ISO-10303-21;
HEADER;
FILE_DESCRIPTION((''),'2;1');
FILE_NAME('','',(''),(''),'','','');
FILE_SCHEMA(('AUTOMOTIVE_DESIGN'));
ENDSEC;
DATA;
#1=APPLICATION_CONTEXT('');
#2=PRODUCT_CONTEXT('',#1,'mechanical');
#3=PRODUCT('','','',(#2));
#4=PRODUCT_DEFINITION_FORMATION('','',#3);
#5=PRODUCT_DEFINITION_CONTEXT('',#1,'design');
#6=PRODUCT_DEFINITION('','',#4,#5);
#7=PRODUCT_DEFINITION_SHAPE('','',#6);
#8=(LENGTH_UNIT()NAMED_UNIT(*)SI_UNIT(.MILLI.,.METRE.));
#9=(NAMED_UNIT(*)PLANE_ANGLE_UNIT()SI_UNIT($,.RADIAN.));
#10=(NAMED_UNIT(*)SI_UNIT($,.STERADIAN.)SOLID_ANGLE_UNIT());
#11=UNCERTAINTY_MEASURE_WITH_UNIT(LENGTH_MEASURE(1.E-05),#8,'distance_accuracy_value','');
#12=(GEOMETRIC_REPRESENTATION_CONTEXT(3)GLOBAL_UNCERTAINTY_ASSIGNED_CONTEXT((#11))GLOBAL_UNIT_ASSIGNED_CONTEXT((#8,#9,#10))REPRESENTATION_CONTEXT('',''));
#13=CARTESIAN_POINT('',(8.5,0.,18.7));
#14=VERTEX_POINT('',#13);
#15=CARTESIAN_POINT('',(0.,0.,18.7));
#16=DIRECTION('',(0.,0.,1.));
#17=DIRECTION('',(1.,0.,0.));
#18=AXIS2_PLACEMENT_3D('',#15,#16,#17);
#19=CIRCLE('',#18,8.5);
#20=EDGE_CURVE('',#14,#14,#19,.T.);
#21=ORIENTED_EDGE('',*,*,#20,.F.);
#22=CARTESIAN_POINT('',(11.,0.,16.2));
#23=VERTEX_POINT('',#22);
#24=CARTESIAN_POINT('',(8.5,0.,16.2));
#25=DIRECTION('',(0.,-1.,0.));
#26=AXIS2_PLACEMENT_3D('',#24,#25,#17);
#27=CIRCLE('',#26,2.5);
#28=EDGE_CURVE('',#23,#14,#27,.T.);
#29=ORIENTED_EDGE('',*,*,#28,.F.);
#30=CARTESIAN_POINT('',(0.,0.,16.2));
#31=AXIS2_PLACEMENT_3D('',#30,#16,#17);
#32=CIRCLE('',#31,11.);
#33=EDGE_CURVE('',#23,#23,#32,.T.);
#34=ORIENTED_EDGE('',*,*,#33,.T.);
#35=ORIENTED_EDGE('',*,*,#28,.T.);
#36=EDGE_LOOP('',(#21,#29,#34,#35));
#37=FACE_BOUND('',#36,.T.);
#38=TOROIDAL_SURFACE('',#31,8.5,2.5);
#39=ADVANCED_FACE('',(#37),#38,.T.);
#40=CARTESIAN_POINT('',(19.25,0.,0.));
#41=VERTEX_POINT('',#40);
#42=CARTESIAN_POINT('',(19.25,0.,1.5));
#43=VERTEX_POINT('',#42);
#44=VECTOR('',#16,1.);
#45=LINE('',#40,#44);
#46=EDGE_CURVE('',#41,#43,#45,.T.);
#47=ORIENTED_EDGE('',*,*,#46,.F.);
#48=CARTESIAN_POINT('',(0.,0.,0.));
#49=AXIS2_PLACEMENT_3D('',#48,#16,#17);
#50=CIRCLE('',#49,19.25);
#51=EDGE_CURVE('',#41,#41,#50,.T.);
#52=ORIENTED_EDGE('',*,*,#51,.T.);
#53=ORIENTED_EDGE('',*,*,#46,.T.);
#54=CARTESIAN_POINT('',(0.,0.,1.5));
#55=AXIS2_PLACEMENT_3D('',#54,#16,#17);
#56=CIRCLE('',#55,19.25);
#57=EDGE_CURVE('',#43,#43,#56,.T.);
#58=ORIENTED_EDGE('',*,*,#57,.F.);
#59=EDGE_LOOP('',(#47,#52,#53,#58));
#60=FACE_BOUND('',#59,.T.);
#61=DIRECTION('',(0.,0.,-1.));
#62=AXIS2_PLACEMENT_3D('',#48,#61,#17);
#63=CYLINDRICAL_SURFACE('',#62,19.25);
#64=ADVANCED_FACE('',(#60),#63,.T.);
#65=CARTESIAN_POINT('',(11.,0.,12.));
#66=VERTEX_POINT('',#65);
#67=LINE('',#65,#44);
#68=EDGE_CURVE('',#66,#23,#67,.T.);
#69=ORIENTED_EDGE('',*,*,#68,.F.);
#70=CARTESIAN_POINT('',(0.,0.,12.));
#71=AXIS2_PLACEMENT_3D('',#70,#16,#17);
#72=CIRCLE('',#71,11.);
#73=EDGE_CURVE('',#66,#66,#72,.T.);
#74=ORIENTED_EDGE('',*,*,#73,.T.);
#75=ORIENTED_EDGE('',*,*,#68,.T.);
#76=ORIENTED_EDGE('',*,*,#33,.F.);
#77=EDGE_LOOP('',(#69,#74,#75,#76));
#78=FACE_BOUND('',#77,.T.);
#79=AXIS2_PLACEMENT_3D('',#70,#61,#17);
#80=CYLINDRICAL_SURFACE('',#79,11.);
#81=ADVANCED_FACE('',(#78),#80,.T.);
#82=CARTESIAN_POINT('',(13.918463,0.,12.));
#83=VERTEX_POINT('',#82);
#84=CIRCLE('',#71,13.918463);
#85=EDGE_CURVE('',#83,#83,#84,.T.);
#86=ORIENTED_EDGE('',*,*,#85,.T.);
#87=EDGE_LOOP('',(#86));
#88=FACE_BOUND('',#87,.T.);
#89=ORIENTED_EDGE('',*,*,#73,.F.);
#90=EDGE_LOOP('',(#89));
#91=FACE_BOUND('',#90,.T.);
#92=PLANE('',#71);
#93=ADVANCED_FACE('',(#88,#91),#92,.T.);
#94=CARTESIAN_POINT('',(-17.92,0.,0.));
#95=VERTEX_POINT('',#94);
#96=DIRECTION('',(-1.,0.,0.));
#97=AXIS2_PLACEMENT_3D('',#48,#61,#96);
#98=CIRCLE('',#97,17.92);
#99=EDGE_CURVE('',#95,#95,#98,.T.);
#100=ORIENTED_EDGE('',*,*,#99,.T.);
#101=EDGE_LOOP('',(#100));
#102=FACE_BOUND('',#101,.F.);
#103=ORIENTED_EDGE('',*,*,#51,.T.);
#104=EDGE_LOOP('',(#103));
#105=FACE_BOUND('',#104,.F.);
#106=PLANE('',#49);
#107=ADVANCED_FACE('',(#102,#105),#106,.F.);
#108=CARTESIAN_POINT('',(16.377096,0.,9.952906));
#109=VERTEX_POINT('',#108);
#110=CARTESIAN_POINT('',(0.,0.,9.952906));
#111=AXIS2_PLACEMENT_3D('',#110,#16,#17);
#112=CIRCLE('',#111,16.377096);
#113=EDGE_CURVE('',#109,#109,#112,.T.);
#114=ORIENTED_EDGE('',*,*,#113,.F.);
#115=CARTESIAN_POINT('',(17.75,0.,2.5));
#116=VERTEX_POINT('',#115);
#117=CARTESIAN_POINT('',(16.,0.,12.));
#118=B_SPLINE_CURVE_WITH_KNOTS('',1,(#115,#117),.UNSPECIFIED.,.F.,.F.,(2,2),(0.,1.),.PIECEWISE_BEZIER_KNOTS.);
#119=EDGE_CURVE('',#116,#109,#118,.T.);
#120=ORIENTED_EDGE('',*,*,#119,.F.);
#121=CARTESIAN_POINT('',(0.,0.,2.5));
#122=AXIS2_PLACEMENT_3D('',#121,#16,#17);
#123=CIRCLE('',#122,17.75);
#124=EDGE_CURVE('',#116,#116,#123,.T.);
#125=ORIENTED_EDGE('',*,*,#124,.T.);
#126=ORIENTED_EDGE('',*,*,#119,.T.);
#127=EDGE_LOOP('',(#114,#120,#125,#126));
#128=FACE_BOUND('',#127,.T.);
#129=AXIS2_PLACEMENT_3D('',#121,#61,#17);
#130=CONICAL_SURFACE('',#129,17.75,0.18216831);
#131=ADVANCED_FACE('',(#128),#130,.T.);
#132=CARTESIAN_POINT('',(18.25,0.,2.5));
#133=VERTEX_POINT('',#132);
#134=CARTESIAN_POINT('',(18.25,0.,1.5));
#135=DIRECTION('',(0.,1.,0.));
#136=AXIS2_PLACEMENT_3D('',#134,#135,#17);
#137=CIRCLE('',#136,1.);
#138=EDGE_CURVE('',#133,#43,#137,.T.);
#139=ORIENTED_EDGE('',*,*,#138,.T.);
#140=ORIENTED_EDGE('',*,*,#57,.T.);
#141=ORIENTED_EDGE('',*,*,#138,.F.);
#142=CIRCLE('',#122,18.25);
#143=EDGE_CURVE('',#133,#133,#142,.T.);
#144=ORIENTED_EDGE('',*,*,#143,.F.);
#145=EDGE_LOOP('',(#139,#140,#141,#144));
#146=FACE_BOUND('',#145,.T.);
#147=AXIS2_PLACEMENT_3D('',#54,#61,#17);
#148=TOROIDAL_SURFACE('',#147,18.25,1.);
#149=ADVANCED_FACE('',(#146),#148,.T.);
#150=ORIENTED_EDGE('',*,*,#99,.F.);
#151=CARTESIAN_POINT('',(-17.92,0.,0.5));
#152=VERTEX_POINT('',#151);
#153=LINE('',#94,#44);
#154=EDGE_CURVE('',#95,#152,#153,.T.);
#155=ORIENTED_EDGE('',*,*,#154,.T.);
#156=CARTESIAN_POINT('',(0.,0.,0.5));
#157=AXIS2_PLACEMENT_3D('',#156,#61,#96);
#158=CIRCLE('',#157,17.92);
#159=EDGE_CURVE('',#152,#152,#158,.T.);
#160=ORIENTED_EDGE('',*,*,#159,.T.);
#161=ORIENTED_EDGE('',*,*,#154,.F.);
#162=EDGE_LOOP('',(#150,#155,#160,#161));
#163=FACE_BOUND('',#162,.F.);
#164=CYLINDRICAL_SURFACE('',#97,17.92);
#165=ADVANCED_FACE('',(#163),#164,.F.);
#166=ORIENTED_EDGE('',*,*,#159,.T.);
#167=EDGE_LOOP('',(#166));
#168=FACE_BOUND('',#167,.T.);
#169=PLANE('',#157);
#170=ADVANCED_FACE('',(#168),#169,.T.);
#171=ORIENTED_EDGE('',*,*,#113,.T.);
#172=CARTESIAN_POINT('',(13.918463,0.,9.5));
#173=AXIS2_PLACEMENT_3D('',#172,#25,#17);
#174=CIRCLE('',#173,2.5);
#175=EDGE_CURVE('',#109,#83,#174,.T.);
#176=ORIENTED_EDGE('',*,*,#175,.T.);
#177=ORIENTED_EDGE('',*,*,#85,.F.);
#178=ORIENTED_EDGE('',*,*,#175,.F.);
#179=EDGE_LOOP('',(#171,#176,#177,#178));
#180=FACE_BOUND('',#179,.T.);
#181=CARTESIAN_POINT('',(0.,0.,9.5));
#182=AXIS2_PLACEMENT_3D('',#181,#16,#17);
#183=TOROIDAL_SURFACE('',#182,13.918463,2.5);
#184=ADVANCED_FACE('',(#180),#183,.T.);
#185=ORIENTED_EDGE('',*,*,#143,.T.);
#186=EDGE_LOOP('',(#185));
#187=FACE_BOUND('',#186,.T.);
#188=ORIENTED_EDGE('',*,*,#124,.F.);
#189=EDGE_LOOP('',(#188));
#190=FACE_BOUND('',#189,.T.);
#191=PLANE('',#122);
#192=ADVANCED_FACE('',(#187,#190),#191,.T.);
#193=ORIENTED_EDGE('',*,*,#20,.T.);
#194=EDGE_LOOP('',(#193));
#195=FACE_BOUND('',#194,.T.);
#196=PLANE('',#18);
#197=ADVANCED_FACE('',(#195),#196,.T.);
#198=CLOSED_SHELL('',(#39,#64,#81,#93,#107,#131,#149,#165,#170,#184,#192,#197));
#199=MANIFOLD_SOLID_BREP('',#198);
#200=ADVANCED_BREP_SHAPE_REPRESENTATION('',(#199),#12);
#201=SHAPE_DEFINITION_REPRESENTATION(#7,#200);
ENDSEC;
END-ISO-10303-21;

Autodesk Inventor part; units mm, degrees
ref_plane "YZ Plane" through (0, 0, 0) normal (1, 0, 0) x (0, 1, 0)
ref_plane "XZ Plane" through (0, 0, 0) normal (0, 1, 0) x (-1, 0, 0)
sketch "Sketch1" plane through (0, 0, 0) normal (0, 0, 1) x (1, 0, 0)
  circle A0 centre (0, 0) radius 19.25
  dimension "d0" = 38.5
extrude "Extrusion1" add sketch "Sketch1" along normal blind 2.5
sketch "Sketch2" plane through (0, 0, 2.5) normal (0, 0, 1) x (1, 0, 0)
  circle A0 centre (0, 0) radius 17.75
  dimension "d3" = 35.5
ref_plane "Work Plane1" through (0, 0, 12) normal (0, 0, 1) x (1, 0, 0)
sketch "Sketch3" plane through (0, 0, 12) normal (0, 0, 1) x (1, 0, 0)
  circle A0 centre (0, 0) radius 16
  dimension "d5" = 32
loft "Loft1" add profiles "Sketch2", "Sketch3"
fillet "Fillet1" radius 2.5 1 edges at (-16, 0, 12)
fillet "Fillet2" radius 1 1 edges at (-19.25, 0, 2.5)
sketch "Sketch4" plane through (0, 0, 12) normal (0, 0, 1) x (1, 0, 0)
  circle A0 centre (0, 0) radius 11
  dimension "d12" = 22
extrude "Extrusion2" add sketch "Sketch4" along normal blind 6.7
fillet "Fillet3" radius 2.5 1 edges at (-11, 0, 18.7)
sketch "Sketch5" plane through (0, 0, 0) normal (0, 0, -1) x (-1, 0, 0)
  circle A0 centre (0, 0) radius 17.92
  circle A1 centre (0, 0) radius 19.25 projected
  dimension "d16" = 1.33
extrude "Extrusion3" cut sketch "Sketch5" against normal blind 0.5 contours A0
properties part number "TongueSpeaker"
